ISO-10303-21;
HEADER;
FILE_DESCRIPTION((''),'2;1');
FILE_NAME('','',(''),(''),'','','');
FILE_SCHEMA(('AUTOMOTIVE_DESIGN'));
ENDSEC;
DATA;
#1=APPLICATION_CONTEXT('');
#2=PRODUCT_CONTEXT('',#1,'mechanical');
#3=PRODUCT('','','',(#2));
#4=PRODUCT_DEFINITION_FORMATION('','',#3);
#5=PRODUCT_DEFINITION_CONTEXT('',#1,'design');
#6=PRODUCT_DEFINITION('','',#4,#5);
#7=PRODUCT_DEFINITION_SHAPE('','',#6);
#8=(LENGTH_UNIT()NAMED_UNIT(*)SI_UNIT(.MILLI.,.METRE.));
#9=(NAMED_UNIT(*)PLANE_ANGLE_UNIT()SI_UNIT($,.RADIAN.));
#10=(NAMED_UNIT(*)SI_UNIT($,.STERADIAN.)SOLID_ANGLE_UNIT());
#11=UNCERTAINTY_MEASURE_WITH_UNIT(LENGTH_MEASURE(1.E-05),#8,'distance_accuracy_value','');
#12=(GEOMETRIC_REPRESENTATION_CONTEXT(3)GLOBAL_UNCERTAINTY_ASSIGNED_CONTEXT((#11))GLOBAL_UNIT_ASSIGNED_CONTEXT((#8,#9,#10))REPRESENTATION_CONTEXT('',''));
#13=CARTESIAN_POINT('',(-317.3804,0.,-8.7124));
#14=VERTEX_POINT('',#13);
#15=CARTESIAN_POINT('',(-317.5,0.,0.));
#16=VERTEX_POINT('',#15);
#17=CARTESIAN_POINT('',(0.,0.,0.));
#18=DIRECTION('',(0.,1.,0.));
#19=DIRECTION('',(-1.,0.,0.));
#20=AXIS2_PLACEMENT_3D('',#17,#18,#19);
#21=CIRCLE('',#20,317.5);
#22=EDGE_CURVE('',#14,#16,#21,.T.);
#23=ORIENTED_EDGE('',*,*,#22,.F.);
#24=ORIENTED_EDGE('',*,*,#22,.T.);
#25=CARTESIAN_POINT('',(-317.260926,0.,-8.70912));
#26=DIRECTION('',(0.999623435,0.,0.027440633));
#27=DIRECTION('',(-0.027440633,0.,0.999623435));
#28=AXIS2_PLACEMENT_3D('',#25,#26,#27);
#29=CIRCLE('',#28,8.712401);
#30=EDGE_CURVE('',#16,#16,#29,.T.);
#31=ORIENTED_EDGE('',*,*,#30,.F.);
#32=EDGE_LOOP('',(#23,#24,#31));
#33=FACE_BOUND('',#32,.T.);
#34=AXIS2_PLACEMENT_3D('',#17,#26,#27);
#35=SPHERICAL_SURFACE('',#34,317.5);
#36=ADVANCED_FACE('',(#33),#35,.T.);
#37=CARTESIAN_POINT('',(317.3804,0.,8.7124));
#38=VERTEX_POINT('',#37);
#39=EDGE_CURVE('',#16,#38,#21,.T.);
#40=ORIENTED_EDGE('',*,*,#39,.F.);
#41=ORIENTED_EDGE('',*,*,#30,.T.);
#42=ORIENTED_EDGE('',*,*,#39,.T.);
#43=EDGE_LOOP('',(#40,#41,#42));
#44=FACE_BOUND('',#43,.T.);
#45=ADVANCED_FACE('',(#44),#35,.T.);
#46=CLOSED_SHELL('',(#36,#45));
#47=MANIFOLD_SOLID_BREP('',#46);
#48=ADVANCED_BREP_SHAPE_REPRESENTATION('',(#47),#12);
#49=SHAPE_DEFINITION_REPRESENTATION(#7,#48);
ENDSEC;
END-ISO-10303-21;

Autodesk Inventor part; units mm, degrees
ref_plane "YZ Plane" through (0, 0, 0) normal (1, 0, 0) x (0, 1, 0)
ref_plane "XZ Plane" through (0, 0, 0) normal (0, 1, 0) x (-1, 0, 0)
ref_plane "XY Plane" through (0, 0, 0) normal (0, 0, 1) x (1, 0, 0)
sketch "Sketch1" plane through (0, 0, 0) normal (0, 1, 0) x (-1, 0, 0)
  circle A0 centre (0, 0) radius 317.5
  line L0 (317.3804, -8.7124) -> (-317.3804, 8.7124)
  dimension "d0" = 635
revolve "Revolution1" add sketch "Sketch1" angle 360 about axis through (-317.3804, 0, -8.7124) along (0.9996234, 0, 0.0274406) picked at (1.4522, 105.8234) contours A0 L0
properties part number "daball"
